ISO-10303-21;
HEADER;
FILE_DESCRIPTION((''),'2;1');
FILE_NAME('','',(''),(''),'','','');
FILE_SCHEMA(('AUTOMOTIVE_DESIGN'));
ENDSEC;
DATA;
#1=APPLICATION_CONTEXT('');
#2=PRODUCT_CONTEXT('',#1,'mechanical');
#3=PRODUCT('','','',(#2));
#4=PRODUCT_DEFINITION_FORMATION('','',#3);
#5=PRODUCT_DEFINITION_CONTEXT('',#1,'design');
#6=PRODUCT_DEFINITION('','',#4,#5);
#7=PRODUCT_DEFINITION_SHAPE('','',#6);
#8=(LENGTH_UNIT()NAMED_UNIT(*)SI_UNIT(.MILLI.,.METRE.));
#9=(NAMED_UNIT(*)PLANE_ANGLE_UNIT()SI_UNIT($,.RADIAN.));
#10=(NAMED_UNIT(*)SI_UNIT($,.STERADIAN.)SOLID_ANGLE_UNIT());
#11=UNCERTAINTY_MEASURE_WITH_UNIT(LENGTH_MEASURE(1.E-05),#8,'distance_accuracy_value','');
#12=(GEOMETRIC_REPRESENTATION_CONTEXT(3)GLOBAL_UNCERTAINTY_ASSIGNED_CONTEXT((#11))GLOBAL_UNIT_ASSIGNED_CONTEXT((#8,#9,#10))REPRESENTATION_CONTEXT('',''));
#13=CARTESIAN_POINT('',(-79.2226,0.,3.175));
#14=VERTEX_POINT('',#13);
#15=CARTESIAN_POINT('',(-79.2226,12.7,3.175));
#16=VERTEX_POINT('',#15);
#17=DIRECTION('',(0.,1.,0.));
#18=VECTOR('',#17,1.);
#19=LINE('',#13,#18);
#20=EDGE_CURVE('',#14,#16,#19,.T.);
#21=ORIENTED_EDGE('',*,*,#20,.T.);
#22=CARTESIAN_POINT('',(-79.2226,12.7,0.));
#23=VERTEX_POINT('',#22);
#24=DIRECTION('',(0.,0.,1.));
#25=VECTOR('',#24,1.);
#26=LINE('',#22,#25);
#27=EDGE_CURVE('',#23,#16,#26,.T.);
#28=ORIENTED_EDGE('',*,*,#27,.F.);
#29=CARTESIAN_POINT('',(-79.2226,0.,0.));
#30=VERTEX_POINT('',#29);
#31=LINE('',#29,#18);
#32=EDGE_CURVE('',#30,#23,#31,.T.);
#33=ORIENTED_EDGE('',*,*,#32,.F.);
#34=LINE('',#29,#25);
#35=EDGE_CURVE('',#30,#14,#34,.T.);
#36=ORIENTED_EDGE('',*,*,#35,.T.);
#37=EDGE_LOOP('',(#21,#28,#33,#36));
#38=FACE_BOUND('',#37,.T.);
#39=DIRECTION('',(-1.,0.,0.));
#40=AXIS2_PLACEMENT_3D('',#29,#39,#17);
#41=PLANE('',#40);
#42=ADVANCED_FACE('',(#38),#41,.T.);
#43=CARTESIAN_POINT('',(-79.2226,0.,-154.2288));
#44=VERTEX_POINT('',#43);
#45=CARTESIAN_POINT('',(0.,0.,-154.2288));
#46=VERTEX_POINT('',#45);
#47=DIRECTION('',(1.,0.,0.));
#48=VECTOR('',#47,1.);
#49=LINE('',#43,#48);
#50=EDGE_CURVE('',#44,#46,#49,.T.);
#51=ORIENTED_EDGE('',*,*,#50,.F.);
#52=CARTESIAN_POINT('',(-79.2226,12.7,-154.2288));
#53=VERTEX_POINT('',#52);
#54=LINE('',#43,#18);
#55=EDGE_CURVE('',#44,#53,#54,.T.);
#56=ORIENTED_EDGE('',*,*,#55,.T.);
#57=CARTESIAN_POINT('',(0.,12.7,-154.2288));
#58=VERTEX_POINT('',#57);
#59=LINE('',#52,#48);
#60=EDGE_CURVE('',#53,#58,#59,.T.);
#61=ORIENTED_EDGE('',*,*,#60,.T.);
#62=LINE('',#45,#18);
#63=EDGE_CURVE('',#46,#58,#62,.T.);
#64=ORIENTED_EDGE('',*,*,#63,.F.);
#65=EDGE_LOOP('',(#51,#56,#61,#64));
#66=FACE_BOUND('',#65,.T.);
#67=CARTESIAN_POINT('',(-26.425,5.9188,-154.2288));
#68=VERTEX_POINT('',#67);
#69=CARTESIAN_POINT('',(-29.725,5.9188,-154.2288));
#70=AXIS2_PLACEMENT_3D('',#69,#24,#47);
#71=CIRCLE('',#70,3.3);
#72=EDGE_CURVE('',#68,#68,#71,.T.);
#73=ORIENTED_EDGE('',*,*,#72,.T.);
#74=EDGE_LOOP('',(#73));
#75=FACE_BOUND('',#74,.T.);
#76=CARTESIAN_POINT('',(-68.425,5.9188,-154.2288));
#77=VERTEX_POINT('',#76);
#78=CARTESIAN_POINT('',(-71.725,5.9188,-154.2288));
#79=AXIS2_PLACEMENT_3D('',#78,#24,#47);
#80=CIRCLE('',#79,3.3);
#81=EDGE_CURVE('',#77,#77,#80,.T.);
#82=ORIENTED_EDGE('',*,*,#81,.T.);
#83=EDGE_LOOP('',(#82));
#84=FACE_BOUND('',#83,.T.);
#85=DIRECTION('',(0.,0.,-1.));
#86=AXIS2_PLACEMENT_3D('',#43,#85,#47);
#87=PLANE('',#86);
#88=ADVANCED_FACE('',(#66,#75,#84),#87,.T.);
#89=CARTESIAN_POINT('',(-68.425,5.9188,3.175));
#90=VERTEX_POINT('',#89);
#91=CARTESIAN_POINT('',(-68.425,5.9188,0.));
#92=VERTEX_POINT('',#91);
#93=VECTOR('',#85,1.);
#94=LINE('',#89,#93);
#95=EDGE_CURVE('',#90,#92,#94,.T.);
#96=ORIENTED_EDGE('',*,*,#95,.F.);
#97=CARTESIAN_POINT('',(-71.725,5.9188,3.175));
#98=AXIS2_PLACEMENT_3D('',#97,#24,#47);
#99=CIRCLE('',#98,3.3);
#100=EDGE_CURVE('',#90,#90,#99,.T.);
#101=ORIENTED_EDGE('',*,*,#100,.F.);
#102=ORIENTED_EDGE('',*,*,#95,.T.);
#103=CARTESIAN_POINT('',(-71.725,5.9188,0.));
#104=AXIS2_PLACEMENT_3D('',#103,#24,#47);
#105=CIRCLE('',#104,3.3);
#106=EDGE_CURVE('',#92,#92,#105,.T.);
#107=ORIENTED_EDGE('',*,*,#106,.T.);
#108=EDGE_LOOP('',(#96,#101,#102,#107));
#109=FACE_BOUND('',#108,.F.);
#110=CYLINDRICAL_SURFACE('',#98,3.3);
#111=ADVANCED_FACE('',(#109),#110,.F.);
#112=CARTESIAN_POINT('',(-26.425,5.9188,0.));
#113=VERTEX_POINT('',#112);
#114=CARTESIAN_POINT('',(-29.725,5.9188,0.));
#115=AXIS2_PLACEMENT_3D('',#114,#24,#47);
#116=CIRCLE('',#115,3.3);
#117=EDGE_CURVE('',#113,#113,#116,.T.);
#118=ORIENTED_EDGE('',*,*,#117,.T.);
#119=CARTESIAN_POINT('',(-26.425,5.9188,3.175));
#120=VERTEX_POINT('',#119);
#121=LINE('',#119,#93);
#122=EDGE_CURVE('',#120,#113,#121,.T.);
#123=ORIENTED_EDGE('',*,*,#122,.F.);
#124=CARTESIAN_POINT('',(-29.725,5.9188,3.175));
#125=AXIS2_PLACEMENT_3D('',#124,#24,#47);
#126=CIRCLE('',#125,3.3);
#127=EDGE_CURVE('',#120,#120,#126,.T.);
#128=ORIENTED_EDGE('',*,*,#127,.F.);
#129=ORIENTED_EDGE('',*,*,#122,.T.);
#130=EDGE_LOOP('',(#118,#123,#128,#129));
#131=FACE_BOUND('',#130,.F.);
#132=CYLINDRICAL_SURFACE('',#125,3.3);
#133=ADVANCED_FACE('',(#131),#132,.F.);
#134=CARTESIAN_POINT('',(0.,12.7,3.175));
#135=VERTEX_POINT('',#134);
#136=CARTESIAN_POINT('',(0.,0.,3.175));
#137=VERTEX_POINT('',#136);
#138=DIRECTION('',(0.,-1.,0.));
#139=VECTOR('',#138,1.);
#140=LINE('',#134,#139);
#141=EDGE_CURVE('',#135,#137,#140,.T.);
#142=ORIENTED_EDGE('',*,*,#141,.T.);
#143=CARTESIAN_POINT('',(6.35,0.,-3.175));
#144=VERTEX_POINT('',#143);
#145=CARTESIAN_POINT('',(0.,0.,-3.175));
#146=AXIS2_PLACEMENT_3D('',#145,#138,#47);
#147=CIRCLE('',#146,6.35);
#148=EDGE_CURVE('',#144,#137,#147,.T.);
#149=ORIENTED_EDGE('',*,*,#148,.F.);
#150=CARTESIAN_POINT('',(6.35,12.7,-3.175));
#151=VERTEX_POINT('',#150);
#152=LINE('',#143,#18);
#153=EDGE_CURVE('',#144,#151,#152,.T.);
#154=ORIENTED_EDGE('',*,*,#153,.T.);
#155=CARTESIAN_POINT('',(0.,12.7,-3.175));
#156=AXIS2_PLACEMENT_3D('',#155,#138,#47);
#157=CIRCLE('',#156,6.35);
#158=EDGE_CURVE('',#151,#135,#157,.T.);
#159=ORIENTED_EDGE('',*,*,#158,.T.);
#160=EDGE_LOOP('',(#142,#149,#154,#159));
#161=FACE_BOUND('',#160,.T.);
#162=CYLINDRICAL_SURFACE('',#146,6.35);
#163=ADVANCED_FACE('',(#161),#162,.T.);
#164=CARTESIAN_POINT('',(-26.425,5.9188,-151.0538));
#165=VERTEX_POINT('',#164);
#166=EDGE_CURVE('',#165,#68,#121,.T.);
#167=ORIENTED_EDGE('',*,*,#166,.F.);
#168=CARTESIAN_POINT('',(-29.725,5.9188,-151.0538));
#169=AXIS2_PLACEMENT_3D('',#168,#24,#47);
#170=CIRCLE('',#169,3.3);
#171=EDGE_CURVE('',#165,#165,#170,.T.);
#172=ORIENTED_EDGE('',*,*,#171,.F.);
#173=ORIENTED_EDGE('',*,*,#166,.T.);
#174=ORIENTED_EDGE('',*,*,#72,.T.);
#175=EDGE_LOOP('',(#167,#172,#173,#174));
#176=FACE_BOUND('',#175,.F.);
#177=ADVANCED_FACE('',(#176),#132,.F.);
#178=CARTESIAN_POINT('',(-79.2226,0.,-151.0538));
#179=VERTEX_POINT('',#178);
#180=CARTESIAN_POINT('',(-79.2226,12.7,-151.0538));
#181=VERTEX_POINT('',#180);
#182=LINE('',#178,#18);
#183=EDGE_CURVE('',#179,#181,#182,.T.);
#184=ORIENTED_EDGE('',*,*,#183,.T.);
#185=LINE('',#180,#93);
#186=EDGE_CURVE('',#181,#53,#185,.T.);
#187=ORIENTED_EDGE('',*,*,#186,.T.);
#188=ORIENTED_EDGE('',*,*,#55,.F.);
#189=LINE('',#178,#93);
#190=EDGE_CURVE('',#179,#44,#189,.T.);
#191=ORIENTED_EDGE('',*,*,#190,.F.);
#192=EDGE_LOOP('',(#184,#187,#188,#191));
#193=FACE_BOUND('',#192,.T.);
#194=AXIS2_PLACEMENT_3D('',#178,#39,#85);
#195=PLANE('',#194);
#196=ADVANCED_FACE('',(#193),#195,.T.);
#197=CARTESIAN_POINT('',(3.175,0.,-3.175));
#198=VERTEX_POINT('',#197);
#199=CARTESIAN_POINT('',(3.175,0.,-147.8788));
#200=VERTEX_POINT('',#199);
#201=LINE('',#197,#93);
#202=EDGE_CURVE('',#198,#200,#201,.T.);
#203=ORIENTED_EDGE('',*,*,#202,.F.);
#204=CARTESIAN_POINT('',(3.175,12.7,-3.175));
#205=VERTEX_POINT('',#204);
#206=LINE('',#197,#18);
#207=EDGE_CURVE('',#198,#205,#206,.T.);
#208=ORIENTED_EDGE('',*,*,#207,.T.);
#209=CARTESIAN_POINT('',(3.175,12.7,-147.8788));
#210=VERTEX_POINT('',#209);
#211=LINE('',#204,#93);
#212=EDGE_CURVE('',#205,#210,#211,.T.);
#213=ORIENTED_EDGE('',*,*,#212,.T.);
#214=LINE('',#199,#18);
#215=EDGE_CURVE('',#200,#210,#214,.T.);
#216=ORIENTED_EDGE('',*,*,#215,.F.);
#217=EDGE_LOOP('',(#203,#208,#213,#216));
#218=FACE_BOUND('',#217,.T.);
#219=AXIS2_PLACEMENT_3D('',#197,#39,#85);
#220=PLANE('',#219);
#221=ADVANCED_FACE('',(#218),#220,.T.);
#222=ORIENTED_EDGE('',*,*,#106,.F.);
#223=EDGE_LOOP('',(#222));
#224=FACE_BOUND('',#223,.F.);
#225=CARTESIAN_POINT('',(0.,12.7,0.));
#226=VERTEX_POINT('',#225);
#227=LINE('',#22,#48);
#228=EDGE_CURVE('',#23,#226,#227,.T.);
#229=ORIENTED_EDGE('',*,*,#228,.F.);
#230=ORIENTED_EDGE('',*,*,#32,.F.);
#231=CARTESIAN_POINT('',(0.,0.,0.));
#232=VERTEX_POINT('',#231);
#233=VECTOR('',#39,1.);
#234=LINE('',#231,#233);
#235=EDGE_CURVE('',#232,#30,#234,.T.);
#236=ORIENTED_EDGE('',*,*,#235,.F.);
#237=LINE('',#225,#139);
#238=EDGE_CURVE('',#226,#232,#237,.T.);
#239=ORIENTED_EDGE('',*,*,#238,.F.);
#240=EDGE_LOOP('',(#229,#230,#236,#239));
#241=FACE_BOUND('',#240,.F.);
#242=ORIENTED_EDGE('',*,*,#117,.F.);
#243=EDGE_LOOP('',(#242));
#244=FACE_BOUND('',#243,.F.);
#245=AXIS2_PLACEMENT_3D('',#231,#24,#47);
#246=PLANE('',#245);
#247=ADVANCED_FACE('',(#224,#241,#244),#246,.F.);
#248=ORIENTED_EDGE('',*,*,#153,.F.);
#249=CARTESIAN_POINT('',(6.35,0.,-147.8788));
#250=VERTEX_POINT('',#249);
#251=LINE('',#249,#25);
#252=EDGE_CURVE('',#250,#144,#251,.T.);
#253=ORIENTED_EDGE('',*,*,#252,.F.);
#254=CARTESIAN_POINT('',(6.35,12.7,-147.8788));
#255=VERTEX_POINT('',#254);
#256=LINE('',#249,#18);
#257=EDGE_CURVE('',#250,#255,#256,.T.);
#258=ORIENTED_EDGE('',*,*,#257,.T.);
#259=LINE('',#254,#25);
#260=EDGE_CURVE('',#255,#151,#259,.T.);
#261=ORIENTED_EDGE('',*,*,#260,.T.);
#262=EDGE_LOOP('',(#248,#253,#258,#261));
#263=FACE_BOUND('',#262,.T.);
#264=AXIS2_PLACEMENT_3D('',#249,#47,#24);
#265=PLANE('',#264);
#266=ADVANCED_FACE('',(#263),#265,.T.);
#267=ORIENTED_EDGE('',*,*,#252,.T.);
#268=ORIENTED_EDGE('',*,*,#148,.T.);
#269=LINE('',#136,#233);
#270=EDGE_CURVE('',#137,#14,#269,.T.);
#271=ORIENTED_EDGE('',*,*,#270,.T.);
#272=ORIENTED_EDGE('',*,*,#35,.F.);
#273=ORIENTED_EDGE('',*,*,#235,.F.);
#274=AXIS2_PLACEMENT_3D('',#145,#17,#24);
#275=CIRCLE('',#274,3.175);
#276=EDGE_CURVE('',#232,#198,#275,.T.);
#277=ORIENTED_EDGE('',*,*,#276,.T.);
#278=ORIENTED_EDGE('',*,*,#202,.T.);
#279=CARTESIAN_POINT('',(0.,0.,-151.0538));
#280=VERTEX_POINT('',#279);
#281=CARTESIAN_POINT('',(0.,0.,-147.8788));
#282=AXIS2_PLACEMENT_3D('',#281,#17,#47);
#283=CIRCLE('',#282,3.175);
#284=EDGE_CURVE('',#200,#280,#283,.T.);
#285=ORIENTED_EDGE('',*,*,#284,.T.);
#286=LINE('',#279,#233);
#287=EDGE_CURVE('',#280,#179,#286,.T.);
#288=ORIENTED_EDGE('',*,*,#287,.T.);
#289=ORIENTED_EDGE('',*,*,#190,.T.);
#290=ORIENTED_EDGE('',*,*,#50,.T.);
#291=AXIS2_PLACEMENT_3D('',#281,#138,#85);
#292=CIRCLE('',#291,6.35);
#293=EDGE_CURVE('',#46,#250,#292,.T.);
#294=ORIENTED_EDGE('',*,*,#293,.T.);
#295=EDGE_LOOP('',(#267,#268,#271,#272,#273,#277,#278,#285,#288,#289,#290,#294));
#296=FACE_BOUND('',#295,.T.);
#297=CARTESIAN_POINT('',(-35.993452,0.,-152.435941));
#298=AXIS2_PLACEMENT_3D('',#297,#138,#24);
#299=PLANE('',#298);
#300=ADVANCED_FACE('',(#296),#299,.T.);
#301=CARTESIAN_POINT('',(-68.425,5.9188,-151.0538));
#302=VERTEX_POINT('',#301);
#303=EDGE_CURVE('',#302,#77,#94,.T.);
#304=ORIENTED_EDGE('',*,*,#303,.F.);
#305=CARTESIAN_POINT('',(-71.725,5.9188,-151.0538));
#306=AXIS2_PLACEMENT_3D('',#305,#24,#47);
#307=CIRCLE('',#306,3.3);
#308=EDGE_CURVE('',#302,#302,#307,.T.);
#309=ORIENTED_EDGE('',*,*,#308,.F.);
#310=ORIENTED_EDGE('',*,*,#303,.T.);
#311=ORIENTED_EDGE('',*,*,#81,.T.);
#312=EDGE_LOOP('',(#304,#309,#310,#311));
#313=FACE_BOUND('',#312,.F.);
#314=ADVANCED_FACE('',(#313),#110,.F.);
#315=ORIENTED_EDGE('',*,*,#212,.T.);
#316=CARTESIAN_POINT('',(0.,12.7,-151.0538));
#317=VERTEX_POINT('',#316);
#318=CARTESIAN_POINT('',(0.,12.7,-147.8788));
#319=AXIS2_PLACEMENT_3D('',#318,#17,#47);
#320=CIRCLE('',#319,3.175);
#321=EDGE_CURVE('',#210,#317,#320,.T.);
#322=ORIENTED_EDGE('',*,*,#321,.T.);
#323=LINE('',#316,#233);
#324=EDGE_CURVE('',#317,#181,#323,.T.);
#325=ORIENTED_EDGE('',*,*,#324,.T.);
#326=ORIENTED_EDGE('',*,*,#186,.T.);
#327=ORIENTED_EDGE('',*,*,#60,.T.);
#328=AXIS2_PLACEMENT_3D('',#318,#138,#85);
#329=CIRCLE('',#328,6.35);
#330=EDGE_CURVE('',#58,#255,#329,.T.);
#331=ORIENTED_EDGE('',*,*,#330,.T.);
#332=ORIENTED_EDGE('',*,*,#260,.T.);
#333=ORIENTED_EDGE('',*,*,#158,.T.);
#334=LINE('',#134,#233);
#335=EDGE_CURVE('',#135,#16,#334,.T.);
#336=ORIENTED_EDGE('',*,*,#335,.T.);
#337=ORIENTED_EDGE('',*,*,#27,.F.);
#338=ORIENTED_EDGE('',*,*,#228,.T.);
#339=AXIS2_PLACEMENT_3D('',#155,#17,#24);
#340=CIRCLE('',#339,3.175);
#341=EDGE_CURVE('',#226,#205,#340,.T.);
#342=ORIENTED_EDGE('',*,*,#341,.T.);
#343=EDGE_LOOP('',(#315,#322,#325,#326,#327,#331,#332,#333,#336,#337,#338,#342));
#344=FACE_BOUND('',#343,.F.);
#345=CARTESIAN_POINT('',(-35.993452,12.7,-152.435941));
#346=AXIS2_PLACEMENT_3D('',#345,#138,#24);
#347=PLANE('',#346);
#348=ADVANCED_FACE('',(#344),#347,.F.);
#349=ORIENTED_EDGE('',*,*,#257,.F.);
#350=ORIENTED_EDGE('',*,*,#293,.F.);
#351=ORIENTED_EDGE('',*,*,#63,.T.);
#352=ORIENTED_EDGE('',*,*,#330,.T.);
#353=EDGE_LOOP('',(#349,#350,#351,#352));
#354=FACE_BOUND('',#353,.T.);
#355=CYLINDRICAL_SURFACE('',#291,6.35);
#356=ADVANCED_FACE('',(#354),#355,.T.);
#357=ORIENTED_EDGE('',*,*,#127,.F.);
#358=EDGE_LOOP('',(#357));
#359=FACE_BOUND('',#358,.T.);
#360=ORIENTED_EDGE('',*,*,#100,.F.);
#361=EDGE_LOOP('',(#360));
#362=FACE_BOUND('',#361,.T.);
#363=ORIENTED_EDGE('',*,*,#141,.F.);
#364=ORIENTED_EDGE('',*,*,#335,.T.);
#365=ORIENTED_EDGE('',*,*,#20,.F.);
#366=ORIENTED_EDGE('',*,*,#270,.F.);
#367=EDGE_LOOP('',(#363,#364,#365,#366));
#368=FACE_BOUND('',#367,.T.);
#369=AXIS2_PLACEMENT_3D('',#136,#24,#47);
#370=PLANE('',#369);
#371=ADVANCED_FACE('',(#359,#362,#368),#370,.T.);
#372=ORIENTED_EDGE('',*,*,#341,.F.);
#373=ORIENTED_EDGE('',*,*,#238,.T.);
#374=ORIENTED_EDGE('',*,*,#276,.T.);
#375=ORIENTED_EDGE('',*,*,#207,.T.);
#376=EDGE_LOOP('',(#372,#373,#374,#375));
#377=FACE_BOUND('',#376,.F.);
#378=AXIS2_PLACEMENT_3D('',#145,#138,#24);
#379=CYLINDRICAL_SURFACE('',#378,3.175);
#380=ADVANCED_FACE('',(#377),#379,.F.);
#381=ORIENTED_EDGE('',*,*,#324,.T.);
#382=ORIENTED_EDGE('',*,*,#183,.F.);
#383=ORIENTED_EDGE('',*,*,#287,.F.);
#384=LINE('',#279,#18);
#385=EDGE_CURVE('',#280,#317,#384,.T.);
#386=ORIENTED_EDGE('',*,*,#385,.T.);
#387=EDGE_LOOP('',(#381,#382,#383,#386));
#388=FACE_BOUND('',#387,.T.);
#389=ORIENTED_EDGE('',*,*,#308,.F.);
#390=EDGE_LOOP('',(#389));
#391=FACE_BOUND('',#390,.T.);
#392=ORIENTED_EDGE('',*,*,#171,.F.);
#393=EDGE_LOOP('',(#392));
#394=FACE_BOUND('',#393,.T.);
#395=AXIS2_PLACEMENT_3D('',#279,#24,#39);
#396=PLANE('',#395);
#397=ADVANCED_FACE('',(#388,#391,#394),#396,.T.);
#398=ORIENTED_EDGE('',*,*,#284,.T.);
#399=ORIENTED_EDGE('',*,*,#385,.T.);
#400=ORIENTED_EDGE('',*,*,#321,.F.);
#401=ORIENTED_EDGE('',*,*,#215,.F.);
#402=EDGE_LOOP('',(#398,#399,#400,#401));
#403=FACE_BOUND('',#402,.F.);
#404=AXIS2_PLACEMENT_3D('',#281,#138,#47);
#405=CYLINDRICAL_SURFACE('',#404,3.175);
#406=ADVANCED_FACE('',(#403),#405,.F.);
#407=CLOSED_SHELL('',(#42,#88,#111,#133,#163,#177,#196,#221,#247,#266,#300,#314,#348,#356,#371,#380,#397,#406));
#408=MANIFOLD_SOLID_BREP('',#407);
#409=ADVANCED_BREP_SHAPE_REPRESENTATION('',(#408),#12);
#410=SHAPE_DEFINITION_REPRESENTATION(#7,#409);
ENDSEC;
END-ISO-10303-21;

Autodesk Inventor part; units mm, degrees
ref_plane "YZ Plane" through (0, 0, 0) normal (1, 0, 0) x (0, 1, 0)
ref_plane "XZ Plane" through (0, 0, 0) normal (0, 1, 0) x (-1, 0, 0)
ref_plane "XY Plane" through (0, 0, 0) normal (0, 0, 1) x (1, 0, 0)
sketch "Sketch1" plane through (0, 0, 0) normal (0, 0, 1) x (1, 0, 0)
  line L0 (0, 0) -> (-79.2226, 0)
  line L1 (-79.2226, 0) -> (-79.2226, 12.7)
  line L2 (-79.2226, 12.7) -> (0, 12.7)
  line L3 (0, 12.7) -> (0, 0)
  line L4 (0, 12.7) -> (-29.718, 12.7)
  line L5 (-79.2226, 12.7) -> (-71.7296, 12.7)
  dimension "d1" = 79.2226
  dimension "d2" = 12.7
  dimension "d5" = 7.493
extrude "Plate5" add sketch "Sketch1" along normal blind 3.175
sketch "Sketch6" plane through (3.175, 0, -3.175) normal (1, 0, 0) x (0, 1, 0)
  line L0 (12.7, 0) -> (0, 0)
  line L1 (0, 0) -> (0, -144.7038)
  line L2 (0, -144.7038) -> (12.7, -144.7038)
  line L3 (12.7, -144.7038) -> (12.7, 0)
edge flange "Flange4" height 151.0538 angle 90 thickness 3.175 bend radius 3.175 thickness toward (1, 0, 0) relief tear relief width 3.175 relief depth 1.5875 edges at (0, 6.35, 0) wall of the first edge with corners at (3.175, 12.7, -3.175) (3.175, 0, -3.175) (3.175, 0, -147.8788) (3.175, 12.7, -147.8788)
bend "Bend4"
corner "Corner4"
sketch "Sketch7" plane through (0, 0, -151.0538) normal (0, 0, -1) x (-1, 0, 0)
  line L0 (0, 12.7) -> (0, 0)
  line L1 (0, 0) -> (79.2226, 0)
  line L2 (79.2226, 0) -> (79.2226, 12.7)
  line L3 (79.2226, 12.7) -> (0, 12.7)
edge flange "Flange5" height 85.5726 angle 90 thickness 3.175 bend radius 3.175 thickness toward (0, 0, -1) relief tear relief width 3.175 relief depth 1.5875 edges at (3.175, 6.35, -147.8788) wall of the first edge with corners at (0, 12.7, -151.0538) (0, 0, -151.0538) (-79.2226, 0, -151.0538) (-79.2226, 12.7, -151.0538)
bend "Bend5"
corner "Corner5"
sketch "Sketch8" plane through (0, 0, 3.175) normal (0, 0, 1) x (1, 0, 0)
  circle A0 centre (-71.725, 5.9188) radius 3.3 projected
  circle A1 centre (-29.725, 5.9188) radius 3.3 projected
extrude "Extrusion2" cut sketch "Sketch8" against normal blind 2539974.6
equation "\"d43\" = BendReliefWidth"
equation "\"d44\" = BendReliefDepth"
equation "\"d45\" = MinimumRemnant"
equation "\"d46\" = BendRadius"
equation "\"d49\" = BendRadius"
equation "\"d50\" = CornerReliefSize"
equation "\"d51\" = GapSize"
equation "\"d52\" = JacobiRadiusSize"
equation "\"d53\" = BendReliefWidth"
equation "\"d54\" = BendReliefDepth"
equation "\"d55\" = MinimumRemnant"
equation "\"d56\" = BendRadius"
equation "\"d59\" = BendRadius"
equation "\"d60\" = CornerReliefSize"
equation "\"d61\" = GapSize"
equation "\"d62\" = JacobiRadiusSize"
equation "\"BendRadius\" = Thickness"
equation "\"BendReliefWidth\" = Thickness"
equation "\"BendReliefDepth\" = 0.5 * Thickness"
equation "\"CornerReliefSize\" = 4 * Thickness"
equation "\"MinimumRemnant\" = 2 * Thickness"
equation "\"TransitionRadius\" = BendRadius"
equation "\"JacobiRadiusSize\" = BendRadius"
equation "\"GapSize\" = Thickness"
equation "\"d8\" = BendRadius"
equation "\"d42\" = BendRadius"
equation "\"Thickness\" = 3.175"
properties part number "tie-together tier 1 wide" material "Aluminum 6061"
